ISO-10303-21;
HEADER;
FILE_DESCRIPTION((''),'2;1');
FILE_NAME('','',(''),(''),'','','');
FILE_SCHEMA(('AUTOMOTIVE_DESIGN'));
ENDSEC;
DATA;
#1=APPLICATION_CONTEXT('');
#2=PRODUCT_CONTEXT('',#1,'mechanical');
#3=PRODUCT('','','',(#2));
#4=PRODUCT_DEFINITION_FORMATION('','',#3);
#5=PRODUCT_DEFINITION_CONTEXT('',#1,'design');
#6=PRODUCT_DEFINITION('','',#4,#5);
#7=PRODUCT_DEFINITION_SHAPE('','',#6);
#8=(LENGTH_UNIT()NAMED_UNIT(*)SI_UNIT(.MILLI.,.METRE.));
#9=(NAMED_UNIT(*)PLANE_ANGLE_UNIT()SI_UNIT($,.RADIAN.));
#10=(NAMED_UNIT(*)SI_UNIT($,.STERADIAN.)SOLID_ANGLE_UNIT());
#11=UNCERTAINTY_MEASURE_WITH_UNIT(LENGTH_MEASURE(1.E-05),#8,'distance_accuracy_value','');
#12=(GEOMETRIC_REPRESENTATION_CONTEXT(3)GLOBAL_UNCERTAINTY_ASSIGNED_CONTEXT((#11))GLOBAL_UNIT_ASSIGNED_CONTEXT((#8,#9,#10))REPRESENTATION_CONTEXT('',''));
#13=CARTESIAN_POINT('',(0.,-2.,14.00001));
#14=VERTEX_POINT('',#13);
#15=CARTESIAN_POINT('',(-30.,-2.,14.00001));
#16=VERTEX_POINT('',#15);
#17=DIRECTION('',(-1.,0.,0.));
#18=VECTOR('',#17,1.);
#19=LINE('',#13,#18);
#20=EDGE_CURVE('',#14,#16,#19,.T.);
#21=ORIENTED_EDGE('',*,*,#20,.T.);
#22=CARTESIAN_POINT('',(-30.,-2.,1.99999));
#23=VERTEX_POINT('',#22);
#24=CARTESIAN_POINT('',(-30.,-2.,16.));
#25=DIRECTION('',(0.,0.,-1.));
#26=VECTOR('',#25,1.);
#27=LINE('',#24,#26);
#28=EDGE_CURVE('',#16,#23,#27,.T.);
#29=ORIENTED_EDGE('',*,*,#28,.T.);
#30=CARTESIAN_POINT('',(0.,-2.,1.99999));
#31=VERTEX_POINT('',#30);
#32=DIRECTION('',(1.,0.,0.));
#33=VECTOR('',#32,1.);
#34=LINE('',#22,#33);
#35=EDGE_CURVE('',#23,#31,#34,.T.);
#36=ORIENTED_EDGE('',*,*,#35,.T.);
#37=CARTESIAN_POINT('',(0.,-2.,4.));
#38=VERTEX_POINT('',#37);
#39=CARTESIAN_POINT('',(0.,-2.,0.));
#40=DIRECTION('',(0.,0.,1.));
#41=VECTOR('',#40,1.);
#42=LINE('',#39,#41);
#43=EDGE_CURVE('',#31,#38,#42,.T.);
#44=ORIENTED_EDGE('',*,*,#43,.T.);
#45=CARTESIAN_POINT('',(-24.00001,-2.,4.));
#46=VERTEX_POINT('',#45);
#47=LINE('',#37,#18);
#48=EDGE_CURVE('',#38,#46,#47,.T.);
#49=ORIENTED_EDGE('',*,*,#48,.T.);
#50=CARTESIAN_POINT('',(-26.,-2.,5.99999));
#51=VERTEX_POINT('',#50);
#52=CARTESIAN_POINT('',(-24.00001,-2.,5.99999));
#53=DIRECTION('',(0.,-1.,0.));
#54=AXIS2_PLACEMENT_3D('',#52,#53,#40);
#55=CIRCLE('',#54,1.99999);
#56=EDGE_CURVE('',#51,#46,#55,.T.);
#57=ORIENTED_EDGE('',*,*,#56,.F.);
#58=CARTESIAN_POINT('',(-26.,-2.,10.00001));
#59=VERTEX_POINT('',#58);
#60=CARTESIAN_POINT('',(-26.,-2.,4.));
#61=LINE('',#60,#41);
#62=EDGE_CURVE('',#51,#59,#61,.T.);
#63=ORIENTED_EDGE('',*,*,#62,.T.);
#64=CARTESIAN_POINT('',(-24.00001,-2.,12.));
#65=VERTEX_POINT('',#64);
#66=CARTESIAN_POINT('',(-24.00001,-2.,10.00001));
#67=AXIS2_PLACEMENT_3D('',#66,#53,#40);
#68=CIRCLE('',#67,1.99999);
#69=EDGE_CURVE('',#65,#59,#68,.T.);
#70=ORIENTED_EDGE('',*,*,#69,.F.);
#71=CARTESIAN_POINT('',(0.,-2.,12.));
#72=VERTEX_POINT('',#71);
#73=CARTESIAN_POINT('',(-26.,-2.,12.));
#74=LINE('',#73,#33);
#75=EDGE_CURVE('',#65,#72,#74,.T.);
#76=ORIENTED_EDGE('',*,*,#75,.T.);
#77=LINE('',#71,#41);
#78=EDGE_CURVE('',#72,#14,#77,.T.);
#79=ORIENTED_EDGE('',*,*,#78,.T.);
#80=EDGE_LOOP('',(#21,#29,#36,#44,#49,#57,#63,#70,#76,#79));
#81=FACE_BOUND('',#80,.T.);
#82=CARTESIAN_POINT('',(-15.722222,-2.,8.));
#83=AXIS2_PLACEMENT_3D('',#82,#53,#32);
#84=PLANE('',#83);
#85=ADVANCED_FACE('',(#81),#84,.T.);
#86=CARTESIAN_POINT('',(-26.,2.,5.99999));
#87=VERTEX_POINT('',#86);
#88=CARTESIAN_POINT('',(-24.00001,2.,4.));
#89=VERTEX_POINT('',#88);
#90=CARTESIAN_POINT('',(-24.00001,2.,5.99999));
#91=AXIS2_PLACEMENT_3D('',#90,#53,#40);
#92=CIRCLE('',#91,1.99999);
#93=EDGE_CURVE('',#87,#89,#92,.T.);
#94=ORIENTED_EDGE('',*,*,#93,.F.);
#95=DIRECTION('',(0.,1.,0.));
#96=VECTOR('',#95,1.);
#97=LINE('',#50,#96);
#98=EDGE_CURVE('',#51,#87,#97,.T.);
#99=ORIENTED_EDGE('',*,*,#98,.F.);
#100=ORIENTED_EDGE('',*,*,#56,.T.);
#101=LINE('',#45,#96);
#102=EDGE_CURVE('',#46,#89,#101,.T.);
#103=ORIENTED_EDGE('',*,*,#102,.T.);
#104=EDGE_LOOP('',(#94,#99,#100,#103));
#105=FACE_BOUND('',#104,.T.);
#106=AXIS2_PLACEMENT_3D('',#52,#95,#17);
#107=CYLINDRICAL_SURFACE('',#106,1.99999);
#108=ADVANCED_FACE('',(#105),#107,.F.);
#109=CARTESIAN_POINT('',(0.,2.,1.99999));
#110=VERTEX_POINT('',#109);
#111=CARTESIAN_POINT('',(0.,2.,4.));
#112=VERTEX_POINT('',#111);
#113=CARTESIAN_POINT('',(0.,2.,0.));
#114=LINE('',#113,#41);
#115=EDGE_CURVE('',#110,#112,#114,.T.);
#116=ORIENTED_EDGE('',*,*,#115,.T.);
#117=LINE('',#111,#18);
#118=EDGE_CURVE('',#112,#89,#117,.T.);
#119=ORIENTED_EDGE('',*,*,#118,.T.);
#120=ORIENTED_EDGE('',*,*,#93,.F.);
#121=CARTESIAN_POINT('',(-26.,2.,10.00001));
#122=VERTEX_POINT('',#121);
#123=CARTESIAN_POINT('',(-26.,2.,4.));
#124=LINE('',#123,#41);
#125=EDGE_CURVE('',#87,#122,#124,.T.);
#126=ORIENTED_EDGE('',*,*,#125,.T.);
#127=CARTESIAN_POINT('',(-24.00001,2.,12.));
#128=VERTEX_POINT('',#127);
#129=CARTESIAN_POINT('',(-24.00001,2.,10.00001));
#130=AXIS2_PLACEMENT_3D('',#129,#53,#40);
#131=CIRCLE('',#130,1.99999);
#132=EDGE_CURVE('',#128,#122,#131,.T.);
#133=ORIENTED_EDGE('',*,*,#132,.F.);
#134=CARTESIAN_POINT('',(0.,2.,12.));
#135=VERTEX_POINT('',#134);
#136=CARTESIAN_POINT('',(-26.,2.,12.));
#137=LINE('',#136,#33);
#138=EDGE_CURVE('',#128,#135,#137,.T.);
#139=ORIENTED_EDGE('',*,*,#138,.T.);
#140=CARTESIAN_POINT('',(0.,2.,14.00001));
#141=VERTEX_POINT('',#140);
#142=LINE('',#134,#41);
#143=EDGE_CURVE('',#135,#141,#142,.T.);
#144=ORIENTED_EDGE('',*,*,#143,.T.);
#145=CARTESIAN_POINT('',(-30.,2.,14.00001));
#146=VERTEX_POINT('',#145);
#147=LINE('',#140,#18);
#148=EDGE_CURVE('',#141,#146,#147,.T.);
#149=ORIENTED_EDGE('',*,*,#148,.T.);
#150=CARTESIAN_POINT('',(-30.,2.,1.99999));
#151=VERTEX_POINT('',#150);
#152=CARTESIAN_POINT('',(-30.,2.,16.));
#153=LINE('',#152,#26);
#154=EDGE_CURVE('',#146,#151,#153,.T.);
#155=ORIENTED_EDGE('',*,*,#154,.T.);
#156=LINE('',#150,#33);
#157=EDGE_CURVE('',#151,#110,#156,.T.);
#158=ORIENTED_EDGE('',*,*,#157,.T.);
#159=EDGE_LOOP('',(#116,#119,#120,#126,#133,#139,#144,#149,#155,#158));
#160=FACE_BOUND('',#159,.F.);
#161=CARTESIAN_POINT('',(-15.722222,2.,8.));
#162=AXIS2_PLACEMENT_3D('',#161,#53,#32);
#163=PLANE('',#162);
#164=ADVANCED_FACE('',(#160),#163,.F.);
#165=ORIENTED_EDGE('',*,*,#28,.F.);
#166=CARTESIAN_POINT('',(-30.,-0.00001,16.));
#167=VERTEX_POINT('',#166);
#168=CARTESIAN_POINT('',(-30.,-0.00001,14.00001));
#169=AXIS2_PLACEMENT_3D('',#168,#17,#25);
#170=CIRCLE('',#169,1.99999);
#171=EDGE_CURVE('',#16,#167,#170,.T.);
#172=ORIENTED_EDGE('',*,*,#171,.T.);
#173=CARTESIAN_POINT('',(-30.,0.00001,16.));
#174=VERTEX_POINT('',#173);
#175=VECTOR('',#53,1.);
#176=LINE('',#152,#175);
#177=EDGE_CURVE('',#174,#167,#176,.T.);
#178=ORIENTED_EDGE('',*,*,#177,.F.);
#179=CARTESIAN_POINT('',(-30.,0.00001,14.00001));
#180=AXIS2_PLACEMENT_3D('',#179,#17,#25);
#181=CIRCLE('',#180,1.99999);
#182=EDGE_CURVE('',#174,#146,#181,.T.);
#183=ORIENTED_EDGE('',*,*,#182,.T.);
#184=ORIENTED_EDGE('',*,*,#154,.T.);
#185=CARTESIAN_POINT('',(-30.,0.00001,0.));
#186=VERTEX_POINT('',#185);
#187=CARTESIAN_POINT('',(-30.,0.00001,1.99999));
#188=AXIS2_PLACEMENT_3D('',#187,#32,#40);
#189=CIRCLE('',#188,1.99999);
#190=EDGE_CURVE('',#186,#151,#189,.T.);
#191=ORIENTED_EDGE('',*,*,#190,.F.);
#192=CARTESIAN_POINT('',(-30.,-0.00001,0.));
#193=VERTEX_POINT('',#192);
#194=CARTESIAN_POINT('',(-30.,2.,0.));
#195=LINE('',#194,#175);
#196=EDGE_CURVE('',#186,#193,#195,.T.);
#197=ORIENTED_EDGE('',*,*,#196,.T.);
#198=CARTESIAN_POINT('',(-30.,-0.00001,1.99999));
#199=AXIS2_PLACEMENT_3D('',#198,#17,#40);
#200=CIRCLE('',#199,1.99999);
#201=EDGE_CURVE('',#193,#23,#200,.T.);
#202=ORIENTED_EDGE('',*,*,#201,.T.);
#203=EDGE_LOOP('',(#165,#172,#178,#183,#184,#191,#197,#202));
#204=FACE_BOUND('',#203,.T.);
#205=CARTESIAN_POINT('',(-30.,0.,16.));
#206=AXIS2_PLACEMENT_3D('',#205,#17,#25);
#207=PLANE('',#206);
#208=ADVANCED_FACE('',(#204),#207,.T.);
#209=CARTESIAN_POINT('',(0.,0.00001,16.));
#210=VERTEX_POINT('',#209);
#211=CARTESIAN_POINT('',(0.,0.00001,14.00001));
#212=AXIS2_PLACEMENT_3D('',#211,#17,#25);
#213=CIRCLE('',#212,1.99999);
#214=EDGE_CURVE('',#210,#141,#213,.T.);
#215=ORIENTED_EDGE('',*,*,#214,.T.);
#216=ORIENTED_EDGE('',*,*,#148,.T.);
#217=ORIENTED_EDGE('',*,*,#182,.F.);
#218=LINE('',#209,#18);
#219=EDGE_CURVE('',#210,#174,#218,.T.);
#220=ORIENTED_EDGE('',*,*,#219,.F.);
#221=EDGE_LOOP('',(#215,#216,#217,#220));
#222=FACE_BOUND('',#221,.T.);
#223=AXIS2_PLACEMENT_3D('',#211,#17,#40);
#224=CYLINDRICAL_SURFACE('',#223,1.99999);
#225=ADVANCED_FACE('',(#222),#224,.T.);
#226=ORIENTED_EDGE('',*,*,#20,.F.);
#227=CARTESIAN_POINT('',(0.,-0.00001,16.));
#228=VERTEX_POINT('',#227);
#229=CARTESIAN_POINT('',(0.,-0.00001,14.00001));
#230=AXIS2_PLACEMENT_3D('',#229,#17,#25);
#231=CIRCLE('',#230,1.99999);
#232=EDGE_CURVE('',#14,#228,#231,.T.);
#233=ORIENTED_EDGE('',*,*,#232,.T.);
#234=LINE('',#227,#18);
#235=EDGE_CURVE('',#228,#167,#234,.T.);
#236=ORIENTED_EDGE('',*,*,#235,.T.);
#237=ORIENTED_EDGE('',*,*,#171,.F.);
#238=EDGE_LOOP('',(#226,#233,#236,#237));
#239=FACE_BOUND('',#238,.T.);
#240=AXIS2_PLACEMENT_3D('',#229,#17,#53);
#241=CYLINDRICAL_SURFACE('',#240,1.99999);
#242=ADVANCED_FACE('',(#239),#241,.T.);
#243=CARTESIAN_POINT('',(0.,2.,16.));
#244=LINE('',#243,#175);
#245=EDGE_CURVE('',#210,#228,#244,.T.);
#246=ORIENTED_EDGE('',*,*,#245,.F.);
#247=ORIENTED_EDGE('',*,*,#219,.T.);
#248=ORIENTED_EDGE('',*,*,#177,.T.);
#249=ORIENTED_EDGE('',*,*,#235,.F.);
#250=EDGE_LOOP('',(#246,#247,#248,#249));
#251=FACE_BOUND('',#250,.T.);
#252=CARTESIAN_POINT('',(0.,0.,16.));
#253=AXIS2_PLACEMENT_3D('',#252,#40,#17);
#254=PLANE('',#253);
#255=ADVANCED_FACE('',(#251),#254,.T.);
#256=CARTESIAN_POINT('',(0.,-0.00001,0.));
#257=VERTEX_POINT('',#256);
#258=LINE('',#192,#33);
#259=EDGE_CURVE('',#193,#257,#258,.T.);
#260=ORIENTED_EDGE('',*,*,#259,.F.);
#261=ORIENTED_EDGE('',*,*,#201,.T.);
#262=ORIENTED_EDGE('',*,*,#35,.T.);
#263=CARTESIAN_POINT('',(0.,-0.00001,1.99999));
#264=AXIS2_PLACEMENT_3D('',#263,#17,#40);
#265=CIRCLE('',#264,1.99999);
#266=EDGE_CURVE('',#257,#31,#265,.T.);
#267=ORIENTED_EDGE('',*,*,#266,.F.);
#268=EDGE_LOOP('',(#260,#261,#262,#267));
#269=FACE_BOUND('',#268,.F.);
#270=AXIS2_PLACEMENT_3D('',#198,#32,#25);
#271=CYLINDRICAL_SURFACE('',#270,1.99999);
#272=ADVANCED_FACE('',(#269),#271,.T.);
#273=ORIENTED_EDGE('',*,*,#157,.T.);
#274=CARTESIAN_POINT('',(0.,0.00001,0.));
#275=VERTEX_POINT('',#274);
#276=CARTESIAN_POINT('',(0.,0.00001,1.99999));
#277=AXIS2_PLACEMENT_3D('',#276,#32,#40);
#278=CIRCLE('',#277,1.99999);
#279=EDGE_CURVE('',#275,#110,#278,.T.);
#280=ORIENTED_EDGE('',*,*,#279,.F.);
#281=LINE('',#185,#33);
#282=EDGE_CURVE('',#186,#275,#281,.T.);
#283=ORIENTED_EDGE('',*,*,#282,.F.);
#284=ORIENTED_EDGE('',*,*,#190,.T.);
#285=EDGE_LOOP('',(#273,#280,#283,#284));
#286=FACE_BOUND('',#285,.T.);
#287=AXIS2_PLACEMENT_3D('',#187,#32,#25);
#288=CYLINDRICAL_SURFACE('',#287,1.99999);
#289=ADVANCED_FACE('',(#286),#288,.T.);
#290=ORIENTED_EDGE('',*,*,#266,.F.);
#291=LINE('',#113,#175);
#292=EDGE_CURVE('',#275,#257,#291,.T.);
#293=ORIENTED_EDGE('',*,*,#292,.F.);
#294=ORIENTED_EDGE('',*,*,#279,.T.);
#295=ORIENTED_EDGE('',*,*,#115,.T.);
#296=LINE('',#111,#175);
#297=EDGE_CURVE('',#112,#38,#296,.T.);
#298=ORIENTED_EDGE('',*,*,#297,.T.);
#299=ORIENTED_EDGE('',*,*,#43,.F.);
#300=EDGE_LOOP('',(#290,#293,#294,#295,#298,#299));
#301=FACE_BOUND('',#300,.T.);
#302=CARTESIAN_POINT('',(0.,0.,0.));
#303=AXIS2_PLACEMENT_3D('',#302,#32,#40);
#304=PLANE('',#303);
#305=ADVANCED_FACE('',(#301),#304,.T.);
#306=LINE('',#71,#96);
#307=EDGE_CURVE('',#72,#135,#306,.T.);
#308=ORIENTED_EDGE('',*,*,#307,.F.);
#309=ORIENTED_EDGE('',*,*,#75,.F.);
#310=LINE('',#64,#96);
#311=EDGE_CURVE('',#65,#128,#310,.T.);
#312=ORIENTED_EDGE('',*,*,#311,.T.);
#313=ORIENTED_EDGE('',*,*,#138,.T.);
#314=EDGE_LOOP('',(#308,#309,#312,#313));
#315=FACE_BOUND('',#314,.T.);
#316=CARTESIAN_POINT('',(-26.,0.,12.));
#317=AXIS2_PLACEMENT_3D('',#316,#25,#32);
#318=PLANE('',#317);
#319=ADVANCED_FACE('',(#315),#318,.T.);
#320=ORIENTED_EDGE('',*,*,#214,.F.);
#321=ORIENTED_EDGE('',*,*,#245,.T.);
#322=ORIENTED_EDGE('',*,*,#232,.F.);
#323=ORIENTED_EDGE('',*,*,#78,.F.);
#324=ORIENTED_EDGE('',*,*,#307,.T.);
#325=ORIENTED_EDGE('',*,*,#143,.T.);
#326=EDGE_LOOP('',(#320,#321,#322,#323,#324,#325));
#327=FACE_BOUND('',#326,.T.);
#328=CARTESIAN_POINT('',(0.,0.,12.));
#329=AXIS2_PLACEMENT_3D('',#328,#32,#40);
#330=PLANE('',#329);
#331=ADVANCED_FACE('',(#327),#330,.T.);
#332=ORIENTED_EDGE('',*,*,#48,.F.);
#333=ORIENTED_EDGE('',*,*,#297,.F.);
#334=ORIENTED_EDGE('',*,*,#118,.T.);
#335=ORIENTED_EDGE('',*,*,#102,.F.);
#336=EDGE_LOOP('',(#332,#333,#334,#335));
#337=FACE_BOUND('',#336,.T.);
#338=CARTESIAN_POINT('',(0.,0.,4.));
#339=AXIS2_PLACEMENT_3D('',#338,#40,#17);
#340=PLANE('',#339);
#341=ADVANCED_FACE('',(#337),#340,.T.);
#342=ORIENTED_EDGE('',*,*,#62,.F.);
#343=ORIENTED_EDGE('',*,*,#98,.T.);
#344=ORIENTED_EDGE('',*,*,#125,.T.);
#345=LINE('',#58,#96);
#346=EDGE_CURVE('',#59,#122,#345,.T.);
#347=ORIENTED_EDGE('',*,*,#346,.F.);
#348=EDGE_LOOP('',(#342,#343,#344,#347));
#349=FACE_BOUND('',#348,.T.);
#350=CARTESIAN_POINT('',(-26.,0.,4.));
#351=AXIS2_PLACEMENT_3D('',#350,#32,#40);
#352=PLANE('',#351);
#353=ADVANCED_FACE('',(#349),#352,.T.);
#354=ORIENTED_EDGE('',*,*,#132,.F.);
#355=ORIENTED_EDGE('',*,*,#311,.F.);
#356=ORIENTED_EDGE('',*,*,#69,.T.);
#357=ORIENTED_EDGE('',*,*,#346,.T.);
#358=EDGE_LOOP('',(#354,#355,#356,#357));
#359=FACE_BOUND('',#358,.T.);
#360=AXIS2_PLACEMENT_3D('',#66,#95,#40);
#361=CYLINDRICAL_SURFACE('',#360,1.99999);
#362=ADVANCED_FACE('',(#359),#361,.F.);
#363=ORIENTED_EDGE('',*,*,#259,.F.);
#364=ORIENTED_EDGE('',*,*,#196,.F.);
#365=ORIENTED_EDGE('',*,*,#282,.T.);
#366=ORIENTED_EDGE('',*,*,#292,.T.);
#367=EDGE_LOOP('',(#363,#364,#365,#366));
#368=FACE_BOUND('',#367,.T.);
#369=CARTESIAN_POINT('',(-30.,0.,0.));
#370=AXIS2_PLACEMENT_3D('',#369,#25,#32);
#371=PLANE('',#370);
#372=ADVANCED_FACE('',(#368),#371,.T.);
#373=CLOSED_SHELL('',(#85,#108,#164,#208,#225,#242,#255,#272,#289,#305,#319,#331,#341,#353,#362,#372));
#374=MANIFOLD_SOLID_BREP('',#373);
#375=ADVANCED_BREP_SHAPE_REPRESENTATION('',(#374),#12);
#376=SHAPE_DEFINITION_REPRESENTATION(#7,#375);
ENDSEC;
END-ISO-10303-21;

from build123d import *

# Parameters (mm, degrees)
F1_DEPTH = 2
F2_R     = 1.99999


# Not quite as in the source:
# - a fillet or chamfer is up to 0.001 mm smaller than in the source, because OpenCascade refuses the exact size


with BuildPart() as f1:
    # F0 (on Front) → F1 (new body, symmetric)
    with BuildSketch(Plane.XZ):
        Polygon((0, 12), (0, 16), (-30, 16), (-30, 0), (0, 0), (0, 4), (-26, 4), (-26, 12), align=None)
    extrude(amount=F1_DEPTH, both=True)

    # F2 (radius 2 in the source; OpenCascade refuses exactly that, so slightly less here)
    f2_edges = [f1.edges().sort_by_distance(p)[0] for p in [
        (-15, -2, 16),
        (-15, 2, 16),
        (-15, -2, 0),
        (-15, 2, 0),
        (-26, 0, 4),
        (-26, 0, 12),
    ]]
    fillet(f2_edges, radius=F2_R)


solid = f1.part
